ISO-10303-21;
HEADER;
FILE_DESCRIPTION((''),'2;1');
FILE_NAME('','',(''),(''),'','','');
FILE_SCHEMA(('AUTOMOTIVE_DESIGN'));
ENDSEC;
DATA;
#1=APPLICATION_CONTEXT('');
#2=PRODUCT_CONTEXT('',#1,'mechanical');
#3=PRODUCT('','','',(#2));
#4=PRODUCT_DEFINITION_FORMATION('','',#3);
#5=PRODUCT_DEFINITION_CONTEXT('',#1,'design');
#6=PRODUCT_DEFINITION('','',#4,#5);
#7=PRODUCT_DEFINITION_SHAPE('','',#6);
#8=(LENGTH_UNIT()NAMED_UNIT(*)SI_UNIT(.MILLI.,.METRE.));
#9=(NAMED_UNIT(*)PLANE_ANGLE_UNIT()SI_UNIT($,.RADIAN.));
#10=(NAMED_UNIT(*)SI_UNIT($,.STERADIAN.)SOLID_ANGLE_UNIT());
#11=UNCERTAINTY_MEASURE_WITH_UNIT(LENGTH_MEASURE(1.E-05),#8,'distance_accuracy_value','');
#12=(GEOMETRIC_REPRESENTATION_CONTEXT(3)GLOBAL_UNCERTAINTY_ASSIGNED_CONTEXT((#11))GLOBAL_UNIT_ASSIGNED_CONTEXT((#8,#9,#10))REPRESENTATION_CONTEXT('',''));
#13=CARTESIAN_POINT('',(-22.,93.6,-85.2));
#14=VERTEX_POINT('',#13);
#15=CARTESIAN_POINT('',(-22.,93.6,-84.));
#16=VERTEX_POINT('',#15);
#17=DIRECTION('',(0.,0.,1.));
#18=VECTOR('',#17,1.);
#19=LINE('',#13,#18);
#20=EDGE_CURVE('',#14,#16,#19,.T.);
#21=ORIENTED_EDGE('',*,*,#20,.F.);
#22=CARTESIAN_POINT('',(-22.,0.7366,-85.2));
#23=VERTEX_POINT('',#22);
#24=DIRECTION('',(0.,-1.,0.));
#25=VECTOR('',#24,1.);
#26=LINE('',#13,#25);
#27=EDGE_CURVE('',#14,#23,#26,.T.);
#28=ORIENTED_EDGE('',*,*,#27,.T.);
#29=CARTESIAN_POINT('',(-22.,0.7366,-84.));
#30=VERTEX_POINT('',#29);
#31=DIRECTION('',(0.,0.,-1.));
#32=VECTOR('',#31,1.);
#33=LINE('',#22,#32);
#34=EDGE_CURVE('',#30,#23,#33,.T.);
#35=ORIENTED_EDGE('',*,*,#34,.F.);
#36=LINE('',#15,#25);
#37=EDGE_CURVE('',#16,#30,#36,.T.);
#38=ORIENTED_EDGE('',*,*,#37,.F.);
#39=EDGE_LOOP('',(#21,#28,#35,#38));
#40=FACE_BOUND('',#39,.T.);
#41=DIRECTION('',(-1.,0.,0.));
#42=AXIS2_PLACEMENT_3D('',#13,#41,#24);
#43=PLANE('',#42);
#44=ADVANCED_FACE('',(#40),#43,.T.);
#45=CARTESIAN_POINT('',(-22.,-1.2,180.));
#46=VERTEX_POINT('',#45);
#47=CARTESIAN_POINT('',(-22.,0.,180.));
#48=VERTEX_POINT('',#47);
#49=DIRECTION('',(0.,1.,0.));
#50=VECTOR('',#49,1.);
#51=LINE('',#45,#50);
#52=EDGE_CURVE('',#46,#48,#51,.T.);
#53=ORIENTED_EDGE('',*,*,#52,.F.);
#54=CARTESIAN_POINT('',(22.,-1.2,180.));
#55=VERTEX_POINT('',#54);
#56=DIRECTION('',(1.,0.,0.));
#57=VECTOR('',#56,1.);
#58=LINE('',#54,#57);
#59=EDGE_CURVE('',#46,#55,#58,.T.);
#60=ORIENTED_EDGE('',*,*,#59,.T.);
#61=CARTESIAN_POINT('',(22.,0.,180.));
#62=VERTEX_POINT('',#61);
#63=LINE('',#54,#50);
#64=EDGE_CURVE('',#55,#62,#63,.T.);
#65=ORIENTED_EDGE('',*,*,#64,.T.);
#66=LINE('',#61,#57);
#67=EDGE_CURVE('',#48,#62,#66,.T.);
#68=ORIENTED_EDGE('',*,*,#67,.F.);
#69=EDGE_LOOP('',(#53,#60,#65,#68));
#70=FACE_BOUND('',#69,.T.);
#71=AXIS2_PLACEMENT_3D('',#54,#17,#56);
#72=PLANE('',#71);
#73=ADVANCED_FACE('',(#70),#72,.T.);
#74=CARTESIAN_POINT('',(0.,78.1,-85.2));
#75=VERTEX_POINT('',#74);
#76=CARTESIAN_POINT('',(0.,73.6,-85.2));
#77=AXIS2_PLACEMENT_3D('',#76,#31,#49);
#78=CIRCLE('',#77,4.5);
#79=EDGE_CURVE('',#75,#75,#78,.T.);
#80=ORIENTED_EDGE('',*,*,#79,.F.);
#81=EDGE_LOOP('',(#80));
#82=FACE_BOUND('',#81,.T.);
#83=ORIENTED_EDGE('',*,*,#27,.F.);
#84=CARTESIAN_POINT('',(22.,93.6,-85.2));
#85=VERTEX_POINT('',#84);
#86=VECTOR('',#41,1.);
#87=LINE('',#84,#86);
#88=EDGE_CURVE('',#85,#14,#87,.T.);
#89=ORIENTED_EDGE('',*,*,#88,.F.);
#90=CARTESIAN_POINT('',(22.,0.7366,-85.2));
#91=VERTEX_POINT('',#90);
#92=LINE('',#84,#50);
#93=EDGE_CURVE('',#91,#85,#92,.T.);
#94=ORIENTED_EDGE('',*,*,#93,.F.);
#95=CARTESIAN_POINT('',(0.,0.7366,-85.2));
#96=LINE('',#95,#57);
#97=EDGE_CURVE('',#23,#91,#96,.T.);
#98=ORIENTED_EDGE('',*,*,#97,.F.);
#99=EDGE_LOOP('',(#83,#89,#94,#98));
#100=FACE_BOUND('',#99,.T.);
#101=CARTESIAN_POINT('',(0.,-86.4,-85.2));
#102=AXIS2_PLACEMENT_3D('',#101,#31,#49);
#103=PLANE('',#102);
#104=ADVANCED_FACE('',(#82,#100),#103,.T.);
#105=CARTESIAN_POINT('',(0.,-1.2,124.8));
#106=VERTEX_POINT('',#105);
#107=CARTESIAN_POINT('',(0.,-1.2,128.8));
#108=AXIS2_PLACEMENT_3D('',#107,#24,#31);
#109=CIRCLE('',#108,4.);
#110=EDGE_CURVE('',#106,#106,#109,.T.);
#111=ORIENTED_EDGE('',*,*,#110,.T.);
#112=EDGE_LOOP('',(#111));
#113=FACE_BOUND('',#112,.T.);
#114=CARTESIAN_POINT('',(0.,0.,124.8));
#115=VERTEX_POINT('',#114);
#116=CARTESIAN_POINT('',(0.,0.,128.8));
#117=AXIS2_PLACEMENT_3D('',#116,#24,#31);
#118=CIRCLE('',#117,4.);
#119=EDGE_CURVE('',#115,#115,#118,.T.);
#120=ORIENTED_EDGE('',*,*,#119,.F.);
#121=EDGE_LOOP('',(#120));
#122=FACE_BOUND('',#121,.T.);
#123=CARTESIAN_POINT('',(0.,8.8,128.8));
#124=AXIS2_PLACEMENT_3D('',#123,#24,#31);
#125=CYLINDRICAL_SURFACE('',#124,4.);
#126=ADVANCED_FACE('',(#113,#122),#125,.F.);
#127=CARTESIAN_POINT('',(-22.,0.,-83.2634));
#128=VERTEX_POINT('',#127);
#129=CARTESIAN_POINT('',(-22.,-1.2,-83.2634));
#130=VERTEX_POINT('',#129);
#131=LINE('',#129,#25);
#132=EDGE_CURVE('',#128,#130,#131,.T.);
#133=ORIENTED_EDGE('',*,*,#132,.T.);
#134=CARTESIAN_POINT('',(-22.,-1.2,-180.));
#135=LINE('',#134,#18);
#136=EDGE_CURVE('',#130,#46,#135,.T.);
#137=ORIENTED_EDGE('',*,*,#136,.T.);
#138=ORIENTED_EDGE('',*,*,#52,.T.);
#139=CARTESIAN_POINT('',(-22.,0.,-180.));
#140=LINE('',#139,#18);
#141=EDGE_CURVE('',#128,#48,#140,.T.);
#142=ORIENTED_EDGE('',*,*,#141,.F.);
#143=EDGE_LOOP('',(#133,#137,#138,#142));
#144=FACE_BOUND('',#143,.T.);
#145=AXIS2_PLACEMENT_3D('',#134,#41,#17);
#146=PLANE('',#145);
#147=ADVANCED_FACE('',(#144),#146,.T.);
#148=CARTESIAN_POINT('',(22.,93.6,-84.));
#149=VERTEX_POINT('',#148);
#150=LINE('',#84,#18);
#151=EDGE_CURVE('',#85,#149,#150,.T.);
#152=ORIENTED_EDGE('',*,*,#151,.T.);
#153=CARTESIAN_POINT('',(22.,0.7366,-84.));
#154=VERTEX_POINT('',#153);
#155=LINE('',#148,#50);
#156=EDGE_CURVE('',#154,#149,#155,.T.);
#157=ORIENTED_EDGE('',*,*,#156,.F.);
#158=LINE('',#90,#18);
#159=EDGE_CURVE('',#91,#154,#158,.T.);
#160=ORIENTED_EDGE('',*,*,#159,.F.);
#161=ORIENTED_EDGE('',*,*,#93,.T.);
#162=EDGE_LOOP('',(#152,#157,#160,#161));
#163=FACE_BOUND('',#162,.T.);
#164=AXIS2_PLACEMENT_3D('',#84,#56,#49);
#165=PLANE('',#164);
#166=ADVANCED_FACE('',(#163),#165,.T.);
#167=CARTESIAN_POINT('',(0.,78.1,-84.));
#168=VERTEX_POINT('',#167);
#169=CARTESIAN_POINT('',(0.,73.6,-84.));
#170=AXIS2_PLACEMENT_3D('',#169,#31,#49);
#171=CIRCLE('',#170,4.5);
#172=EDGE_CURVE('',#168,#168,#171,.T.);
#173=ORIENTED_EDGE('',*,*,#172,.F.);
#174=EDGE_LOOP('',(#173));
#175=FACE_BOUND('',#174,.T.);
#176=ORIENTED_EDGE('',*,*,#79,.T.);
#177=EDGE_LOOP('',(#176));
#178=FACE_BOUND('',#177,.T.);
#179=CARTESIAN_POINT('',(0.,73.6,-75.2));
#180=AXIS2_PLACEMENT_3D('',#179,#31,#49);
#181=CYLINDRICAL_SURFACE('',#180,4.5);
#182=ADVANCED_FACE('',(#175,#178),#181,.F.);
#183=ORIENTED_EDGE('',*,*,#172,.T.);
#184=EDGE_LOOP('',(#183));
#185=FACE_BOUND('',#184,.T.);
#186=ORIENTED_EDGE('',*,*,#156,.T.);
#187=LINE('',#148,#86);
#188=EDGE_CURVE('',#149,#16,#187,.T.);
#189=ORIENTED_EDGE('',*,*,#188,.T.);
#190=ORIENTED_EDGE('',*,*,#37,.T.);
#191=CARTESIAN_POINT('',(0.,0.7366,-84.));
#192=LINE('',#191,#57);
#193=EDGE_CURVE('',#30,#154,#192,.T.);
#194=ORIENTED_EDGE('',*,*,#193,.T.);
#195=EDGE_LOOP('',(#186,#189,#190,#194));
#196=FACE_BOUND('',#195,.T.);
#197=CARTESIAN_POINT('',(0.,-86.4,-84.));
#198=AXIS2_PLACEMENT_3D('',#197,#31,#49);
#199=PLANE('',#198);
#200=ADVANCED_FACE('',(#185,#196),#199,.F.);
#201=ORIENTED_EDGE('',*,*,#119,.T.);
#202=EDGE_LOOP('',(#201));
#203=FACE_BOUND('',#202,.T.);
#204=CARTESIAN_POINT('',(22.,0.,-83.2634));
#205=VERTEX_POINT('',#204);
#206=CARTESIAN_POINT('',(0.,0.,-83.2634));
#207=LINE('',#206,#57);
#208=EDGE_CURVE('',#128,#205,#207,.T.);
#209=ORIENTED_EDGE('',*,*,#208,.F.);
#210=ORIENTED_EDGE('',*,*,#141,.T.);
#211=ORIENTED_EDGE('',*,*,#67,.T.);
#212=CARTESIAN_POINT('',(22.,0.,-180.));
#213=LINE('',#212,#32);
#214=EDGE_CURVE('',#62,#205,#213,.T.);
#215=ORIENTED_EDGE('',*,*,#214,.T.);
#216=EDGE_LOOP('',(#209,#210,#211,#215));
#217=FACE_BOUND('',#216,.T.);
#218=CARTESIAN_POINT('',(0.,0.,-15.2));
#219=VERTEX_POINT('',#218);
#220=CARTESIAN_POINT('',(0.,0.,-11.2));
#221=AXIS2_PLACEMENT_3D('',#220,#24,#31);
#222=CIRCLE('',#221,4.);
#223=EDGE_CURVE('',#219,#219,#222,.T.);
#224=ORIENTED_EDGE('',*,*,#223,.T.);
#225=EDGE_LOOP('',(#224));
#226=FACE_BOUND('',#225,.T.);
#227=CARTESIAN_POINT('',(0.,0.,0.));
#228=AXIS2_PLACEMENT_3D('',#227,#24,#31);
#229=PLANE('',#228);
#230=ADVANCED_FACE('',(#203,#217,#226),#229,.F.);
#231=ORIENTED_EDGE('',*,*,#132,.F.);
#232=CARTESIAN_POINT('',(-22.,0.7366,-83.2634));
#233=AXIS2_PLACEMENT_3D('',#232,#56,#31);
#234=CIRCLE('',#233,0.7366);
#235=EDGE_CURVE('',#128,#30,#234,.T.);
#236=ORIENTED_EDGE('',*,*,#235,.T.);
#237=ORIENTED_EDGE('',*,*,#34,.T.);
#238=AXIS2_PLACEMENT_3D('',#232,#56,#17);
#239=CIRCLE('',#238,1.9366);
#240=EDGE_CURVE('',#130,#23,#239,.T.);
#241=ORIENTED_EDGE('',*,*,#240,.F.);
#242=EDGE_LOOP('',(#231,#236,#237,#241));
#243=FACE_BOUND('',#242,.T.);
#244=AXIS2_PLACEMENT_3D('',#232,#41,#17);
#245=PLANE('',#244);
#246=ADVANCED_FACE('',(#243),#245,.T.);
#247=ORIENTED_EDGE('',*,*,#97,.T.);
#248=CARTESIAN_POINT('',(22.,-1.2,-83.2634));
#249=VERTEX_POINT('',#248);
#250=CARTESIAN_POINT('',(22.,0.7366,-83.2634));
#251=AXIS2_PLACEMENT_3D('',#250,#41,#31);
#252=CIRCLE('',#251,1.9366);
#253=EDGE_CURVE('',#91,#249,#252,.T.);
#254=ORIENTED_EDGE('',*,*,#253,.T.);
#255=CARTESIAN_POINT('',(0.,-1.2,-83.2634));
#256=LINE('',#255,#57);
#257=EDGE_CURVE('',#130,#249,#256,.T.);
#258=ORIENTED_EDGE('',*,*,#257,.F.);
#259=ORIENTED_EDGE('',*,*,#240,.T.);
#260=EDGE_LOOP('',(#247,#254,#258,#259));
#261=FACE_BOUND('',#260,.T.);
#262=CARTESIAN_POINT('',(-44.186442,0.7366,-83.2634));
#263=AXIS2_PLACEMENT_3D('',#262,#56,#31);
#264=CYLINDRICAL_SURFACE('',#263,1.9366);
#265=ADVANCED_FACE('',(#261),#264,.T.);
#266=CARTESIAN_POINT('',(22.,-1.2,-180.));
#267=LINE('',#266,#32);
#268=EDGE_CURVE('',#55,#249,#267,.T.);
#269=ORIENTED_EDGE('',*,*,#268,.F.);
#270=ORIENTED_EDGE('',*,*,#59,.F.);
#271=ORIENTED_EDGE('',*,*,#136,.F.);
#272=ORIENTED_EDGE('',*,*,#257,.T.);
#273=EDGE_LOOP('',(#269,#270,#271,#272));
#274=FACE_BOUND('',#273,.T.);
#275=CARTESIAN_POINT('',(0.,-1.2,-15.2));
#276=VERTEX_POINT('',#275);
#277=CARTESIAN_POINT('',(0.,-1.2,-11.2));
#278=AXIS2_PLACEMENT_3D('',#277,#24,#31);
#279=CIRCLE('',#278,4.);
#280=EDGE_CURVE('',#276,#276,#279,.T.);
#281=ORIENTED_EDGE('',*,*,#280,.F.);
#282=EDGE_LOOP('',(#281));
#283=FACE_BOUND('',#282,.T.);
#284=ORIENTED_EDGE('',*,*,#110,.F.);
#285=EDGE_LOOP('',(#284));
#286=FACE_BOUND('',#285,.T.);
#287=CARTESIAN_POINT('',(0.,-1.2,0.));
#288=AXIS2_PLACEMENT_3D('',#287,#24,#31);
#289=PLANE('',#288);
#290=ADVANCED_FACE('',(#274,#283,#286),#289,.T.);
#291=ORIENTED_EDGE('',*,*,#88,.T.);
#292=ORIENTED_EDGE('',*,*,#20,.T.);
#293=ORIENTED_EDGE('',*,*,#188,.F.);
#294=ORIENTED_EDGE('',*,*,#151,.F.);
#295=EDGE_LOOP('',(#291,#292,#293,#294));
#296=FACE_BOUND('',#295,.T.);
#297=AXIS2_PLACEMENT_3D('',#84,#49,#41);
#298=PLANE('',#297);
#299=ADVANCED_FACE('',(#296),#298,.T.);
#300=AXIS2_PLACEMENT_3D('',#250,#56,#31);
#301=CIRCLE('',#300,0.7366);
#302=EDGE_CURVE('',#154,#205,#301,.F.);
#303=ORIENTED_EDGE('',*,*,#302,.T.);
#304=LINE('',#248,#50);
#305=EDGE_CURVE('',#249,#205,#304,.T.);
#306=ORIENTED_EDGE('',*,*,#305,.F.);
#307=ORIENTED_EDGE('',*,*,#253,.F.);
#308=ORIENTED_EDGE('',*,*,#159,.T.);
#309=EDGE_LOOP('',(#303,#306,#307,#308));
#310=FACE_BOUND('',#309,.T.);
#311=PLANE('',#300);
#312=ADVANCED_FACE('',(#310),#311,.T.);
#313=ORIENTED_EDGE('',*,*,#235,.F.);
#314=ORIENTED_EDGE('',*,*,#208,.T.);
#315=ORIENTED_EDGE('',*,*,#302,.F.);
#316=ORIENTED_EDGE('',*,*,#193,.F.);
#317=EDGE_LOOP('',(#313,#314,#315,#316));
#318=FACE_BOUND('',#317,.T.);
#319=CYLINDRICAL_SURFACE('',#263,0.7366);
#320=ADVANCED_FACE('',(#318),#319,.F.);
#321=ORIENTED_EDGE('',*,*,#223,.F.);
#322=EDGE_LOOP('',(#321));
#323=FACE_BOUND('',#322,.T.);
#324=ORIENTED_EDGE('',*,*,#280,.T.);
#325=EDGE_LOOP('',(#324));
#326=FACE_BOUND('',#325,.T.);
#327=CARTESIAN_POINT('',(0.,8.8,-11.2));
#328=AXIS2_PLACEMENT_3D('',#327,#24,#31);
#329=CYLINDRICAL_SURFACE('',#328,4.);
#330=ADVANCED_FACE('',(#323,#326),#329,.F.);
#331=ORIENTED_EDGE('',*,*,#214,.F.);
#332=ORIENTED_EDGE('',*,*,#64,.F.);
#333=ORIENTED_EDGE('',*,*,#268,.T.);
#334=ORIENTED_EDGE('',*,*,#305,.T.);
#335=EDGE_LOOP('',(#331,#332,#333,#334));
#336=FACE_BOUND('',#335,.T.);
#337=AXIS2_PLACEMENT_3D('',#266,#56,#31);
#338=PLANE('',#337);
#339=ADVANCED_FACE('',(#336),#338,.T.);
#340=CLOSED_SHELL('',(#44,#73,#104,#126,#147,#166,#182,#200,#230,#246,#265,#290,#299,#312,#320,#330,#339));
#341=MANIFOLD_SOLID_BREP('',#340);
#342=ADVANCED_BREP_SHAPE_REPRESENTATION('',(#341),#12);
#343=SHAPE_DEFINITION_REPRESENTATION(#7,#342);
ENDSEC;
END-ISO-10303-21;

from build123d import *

# Parameters (mm, degrees)
SKETCH1_W              = 44
SKETCH1_H              = 360
BASE_FLANGE1_DEPTH     = 1.2
SKETCHED_START         = -22
SKETCHED_BEND1_DEPTH   = 44
SKETCHED_BEND1_2_DEPTH = 44
SKETCH7_R              = 4.5
CUT_EXTRUDE1_DEPTH     = 10
SKETCH8_R              = 4
CUT_EXTRUDE2_DEPTH     = 10


# Read off the part's stored shape, not the designer's step: Sketched Bend1
# Sheet-metal steps are written as plain solids
with BuildPart() as part:
    # Sketch1 → Base-Flange1 (new body)
    with BuildSketch(Plane(origin=(0, 0, 0), x_dir=(1, 0, 0), z_dir=(0, 1, 0))):
        Rectangle(SKETCH1_W, SKETCH1_H)
    extrude(amount=-BASE_FLANGE1_DEPTH)

    # Sketched Bend1 outline → Sketched Bend1 (cut)
    with BuildSketch(Plane.YZ.offset(SKETCHED_START)):
        with BuildLine():
            Line((0, -180), (0, -85.054444388))
            ThreePointArc((0, -85.054444388), (-0.872269031, -84.341342484), (-1.2, -83.2634))
            Line((-1.2, -83.2634), (-1.2, -180))
            Line((-1.2, -180), (0, -180))
        make_face()
    extrude(amount=SKETCHED_BEND1_DEPTH, mode=Mode.SUBTRACT)

    # Sketched Bend1 2 outline → Sketched Bend1 2 (add)
    with BuildSketch(Plane.YZ.offset(SKETCHED_START)):
        with BuildLine():
            Line((93.6, -84), (0.7366, -84))
            ThreePointArc((0.7366, -84), (0.215745145, -83.784254855), (0, -83.2634))
            Line((0, -83.2634), (0, -85.054444388))
            ThreePointArc((0, -85.054444388), (0.361178238, -85.163262642), (0.7366, -85.2))
            Line((0.7366, -85.2), (93.6, -85.2))
            Line((93.6, -85.2), (93.6, -84))
        make_face()
    extrude(amount=SKETCHED_BEND1_2_DEPTH)

    # Sketch7 → Cut-Extrude1 (cut)
    with BuildSketch(Plane(origin=(0, 0, -85.2), x_dir=(-1, 0, 0), z_dir=(0, 0, -1))):
        with Locations(Location((0, 73.6, 0), (0, 0, 90))):
            Circle(SKETCH7_R)
    extrude(amount=-CUT_EXTRUDE1_DEPTH, mode=Mode.SUBTRACT)

    # Sketch8 → Cut-Extrude2 (cut)
    with BuildSketch(Plane.XZ.offset(1.2)):
        with Locations(Location((0, -11.2, 0), (0, 0, 270))):
            Circle(SKETCH8_R)
        with Locations(Location((0, 128.8, 0), (0, 0, 270))):
            Circle(SKETCH8_R)
    extrude(amount=-CUT_EXTRUDE2_DEPTH, mode=Mode.SUBTRACT)


solid = part.part
